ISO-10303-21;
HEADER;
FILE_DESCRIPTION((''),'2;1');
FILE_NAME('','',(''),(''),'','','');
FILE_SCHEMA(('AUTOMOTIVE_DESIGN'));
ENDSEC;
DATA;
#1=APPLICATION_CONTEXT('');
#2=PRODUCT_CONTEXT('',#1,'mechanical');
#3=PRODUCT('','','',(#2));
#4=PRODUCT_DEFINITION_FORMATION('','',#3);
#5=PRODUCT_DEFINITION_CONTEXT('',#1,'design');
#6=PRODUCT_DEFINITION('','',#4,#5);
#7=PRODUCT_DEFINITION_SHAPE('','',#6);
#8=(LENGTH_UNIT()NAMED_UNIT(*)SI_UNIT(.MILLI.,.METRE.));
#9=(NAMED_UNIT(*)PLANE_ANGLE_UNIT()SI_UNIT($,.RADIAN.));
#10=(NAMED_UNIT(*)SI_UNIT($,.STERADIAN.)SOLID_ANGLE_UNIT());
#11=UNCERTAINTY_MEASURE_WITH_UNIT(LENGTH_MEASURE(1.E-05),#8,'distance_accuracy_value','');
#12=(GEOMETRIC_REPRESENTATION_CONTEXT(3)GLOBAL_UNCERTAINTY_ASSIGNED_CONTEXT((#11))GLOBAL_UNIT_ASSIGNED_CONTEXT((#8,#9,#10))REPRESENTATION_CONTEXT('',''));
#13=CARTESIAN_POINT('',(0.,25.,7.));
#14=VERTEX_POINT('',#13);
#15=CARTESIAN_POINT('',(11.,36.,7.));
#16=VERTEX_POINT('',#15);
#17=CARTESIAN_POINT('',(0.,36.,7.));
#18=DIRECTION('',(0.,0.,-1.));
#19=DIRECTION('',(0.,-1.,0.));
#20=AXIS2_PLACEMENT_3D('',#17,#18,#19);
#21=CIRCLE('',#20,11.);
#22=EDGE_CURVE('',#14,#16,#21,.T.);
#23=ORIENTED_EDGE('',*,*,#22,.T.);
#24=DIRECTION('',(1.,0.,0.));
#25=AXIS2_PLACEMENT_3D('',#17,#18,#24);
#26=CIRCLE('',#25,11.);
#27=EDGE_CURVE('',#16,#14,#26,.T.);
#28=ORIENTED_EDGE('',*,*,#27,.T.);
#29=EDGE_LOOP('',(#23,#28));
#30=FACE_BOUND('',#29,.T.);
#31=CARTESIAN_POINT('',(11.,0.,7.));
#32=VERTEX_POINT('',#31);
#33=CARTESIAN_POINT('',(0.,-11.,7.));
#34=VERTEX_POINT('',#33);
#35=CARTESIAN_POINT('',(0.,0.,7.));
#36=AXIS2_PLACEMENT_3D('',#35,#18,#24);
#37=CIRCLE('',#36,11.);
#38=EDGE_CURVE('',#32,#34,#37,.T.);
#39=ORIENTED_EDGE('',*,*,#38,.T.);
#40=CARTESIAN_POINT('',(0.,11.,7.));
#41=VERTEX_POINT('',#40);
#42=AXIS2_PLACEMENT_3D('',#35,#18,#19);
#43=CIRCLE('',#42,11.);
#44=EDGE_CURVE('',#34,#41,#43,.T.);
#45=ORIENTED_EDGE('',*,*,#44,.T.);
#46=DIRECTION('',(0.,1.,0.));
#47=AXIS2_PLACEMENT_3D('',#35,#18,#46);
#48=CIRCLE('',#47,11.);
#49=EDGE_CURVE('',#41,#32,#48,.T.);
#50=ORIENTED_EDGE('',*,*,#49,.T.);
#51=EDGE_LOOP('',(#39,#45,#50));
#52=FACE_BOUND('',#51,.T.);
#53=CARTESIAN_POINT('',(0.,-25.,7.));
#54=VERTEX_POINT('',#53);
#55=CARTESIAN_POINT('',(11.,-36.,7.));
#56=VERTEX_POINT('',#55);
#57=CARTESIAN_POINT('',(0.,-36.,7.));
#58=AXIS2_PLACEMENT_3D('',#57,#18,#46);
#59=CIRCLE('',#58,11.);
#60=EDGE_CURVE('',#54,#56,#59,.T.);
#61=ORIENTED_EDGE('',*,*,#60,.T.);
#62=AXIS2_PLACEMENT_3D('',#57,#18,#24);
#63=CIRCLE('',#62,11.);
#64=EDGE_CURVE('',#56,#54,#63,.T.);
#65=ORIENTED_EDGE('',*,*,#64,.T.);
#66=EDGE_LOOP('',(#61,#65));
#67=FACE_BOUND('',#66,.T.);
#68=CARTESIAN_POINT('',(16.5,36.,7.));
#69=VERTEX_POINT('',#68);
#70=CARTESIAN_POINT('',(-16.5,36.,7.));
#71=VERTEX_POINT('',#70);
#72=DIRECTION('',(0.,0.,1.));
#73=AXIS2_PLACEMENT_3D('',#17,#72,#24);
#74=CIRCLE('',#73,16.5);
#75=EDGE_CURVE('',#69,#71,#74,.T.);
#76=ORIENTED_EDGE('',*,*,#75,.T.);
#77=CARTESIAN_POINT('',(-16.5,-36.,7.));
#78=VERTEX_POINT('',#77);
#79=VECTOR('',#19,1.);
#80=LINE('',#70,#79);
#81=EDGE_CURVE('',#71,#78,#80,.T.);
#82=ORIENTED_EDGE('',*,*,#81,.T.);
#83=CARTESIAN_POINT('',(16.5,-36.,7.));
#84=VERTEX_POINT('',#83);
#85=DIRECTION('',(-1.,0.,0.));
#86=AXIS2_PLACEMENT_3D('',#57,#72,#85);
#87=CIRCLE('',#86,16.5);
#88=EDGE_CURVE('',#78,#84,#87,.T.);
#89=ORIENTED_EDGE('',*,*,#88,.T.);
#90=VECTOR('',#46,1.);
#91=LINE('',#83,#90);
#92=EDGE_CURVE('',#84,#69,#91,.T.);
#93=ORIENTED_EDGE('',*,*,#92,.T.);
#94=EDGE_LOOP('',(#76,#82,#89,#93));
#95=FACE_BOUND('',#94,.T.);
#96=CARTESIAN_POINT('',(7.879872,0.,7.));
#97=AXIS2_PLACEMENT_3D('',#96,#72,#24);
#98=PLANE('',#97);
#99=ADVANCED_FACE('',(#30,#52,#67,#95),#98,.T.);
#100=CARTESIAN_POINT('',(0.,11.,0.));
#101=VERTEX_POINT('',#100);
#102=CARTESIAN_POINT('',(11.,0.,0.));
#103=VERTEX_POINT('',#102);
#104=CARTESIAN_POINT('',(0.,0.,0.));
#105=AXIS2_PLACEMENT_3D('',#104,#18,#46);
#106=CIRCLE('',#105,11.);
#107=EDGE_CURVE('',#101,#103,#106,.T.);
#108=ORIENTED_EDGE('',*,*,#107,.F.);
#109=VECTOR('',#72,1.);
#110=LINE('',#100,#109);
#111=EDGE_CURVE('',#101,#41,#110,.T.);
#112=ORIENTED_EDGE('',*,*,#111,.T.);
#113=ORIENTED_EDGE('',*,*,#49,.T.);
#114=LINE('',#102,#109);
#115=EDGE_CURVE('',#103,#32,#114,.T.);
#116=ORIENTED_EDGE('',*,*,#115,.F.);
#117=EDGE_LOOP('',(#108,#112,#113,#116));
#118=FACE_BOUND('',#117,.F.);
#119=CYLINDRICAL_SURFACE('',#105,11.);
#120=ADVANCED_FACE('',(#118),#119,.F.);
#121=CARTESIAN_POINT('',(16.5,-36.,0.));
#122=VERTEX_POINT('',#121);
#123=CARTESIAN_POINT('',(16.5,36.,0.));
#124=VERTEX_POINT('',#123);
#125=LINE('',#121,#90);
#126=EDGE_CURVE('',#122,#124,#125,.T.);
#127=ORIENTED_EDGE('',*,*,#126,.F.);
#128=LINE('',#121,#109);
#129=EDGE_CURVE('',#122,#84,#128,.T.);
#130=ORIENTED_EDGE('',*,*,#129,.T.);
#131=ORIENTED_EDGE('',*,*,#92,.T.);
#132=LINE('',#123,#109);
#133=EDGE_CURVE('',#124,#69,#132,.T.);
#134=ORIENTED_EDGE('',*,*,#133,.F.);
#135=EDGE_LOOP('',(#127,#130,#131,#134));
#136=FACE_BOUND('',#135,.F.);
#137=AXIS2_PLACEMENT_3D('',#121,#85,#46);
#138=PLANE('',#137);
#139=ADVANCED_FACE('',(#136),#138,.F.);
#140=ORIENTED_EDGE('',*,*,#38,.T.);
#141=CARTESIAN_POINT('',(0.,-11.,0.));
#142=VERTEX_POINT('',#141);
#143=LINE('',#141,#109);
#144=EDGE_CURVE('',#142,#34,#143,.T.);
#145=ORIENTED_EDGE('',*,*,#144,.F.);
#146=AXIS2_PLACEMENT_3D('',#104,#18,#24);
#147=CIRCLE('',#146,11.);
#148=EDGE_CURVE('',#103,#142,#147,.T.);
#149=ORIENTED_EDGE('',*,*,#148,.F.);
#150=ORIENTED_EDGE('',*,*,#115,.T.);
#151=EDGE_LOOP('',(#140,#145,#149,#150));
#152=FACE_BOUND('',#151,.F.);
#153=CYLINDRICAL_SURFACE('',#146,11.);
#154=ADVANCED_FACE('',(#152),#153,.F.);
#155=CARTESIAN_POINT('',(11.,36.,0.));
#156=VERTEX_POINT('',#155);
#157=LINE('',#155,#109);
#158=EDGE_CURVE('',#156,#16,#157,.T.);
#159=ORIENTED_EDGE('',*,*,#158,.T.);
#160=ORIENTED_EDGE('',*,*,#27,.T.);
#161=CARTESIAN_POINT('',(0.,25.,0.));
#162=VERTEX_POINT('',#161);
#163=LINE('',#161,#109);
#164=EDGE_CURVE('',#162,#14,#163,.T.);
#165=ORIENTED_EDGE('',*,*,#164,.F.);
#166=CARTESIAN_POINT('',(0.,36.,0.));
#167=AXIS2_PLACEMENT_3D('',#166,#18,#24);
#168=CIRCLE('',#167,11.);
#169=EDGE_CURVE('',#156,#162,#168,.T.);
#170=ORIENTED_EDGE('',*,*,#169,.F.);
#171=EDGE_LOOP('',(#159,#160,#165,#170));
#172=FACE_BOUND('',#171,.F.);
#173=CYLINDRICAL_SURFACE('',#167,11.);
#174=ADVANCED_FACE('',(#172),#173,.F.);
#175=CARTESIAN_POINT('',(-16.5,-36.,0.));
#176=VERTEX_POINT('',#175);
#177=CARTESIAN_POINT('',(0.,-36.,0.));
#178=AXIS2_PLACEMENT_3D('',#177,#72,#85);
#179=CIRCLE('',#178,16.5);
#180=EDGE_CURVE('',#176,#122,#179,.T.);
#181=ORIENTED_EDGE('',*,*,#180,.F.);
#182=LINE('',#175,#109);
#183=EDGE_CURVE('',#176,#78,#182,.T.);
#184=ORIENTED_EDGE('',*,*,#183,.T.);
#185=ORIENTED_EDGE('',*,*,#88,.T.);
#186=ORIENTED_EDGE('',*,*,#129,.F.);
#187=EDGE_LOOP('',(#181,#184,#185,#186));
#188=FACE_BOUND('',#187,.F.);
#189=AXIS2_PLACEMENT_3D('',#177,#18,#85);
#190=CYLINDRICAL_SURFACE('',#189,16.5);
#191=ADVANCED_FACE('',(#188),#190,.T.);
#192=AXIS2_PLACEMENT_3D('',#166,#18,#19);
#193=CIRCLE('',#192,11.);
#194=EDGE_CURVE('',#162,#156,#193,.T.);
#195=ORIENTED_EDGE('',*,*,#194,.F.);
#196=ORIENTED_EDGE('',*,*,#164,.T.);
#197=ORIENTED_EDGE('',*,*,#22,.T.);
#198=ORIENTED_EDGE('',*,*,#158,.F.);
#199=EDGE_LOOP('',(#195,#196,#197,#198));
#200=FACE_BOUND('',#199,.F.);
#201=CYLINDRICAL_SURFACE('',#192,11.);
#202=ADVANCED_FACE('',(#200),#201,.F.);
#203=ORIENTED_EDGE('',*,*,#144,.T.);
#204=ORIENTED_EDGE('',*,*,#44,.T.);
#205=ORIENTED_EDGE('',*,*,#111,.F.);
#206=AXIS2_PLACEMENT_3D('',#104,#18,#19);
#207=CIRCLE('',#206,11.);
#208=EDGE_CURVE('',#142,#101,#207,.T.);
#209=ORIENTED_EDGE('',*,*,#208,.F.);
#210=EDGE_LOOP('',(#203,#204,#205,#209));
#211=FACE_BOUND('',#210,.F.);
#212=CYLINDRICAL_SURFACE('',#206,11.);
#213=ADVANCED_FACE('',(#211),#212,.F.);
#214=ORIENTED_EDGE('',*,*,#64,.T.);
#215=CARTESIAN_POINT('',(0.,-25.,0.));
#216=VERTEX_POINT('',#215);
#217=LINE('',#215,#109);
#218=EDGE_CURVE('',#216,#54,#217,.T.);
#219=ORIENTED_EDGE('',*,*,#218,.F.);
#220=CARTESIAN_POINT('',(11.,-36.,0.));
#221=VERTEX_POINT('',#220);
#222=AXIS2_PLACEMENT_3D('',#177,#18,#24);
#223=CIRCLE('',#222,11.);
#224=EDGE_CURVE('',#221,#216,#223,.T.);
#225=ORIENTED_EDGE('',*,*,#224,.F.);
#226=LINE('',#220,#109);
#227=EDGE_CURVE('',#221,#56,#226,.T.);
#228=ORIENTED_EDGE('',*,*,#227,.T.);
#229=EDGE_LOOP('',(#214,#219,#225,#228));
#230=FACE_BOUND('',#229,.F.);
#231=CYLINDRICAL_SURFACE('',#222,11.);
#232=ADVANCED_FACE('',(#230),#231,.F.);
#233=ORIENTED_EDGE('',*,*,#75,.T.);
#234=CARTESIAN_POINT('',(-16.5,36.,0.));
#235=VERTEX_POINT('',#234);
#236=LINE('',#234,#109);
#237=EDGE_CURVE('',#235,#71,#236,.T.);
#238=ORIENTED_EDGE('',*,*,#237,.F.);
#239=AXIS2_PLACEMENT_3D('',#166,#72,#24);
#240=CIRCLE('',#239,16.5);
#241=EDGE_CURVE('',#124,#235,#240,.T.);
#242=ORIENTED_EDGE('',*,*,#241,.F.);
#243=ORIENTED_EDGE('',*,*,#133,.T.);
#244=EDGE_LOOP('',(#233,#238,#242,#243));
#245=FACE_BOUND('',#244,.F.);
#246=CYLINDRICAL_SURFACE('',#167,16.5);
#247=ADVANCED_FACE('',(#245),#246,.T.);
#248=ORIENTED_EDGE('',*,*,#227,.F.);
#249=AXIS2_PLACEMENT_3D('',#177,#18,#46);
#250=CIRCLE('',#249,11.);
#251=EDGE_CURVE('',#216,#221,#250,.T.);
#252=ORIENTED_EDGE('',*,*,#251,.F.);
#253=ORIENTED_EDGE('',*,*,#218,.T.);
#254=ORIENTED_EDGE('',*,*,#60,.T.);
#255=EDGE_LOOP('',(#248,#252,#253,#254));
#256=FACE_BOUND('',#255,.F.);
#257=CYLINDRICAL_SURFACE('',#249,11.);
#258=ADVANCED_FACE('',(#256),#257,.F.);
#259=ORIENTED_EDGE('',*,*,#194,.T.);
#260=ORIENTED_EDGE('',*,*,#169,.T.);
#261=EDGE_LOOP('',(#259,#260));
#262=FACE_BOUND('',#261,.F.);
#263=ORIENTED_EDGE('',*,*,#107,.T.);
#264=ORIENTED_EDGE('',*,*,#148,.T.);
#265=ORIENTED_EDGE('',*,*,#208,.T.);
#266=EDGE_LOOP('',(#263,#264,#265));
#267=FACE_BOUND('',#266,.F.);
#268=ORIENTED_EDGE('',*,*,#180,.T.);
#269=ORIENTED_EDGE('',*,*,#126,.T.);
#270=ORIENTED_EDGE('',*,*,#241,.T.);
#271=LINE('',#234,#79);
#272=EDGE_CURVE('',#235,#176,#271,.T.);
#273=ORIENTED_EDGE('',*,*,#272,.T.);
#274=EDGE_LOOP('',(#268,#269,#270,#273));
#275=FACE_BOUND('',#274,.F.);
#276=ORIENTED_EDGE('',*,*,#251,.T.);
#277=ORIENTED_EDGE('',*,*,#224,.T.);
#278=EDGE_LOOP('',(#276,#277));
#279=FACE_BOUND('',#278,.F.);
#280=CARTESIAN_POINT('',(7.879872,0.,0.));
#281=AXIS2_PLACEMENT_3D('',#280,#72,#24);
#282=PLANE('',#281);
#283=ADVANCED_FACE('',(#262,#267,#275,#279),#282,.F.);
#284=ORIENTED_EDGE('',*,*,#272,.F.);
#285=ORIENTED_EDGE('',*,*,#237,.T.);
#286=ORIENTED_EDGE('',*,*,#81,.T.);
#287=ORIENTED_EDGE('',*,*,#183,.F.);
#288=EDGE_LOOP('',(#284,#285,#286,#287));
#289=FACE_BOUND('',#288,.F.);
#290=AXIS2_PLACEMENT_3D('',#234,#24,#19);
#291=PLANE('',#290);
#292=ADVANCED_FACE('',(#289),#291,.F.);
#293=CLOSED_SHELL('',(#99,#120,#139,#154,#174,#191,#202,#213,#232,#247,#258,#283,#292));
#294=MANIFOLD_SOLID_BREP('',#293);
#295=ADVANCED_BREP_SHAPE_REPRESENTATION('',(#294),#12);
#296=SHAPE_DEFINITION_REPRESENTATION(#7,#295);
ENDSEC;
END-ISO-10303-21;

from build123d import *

# Parameters (mm, degrees)
F1_DEPTH = 7


# Not quite as in the source:
# - a feature names something its author has since deleted; it is built from what else it names


with BuildPart() as f1:
    # F0 (on Top) → F1 (new body)
    with BuildSketch(Plane.XY):
        with BuildLine():
            ThreePointArc((0, 11), (7.7781745931, 7.7781745931), (11, 0))
            ThreePointArc((11, 0), (7.7781745931, -7.7781745931), (0, -11))
            Line((0, -11), (0, -16.5))
            ThreePointArc((0, -16.5), (11.6672618896, -11.6672618896), (16.5, 0))
            ThreePointArc((16.5, 0), (11.6672618896, 11.6672618896), (0, 16.5))
            Line((0, 16.5), (0, 11))
        make_face()
        with BuildLine():
            ThreePointArc((0, -11), (-11, 0), (0, 11))
            Line((0, 11), (0, 16.5))
            ThreePointArc((0, 16.5), (-11.6672618896, 11.6672618896), (-16.5, 0))
            ThreePointArc((-16.5, 0), (-11.6672618896, -11.6672618896), (0, -16.5))
            Line((0, -16.5), (0, -11))
        make_face()
        with BuildLine():
            Line((0, 19.5), (0, 16.5))
            ThreePointArc((0, 16.5), (11.6672618896, 11.6672618896), (16.5, 0))
            Line((16.5, 0), (16.5, 36))
            ThreePointArc((16.5, 36), (11.6672618896, 24.3327381104), (0, 19.5))
        make_face()
        with BuildLine():
            ThreePointArc((-16.5, 0), (-11.6672618896, 11.6672618896), (0, 16.5))
            Line((0, 16.5), (0, 19.5))
            ThreePointArc((0, 19.5), (-11.6672618896, 24.3327381104), (-16.5, 36))
            Line((-16.5, 36), (-16.5, 0))
        make_face()
        with BuildLine():
            Line((0, -19.5), (0, -16.5))
            ThreePointArc((0, -16.5), (-11.6672618896, -11.6672618896), (-16.5, 0))
            Line((-16.5, 0), (-16.5, -36))
            ThreePointArc((-16.5, -36), (-11.6672618896, -24.3327381104), (0, -19.5))
        make_face()
        with BuildLine():
            ThreePointArc((16.5, 0), (11.6672618896, -11.6672618896), (0, -16.5))
            Line((0, -16.5), (0, -19.5))
            ThreePointArc((0, -19.5), (11.6672618896, -24.3327381104), (16.5, -36))
            Line((16.5, -36), (16.5, 0))
        make_face()
        with BuildLine():
            ThreePointArc((-16.5, 36), (-11.6672618896, 24.3327381104), (0, 19.5))
            ThreePointArc((0, 19.5), (11.6672618896, 24.3327381104), (16.5, 36))
            ThreePointArc((16.5, 36), (0, 52.5), (-16.5, 36))
        make_face()
        with BuildLine():
            ThreePointArc((11, 36), (7.7781745931, 28.2218254069), (0, 25))
            ThreePointArc((0, 25), (-7.7781745931, 43.7781745931), (11, 36))
        make_face(mode=Mode.SUBTRACT)
        with BuildLine():
            ThreePointArc((16.5, -36), (11.6672618896, -24.3327381104), (0, -19.5))
            ThreePointArc((0, -19.5), (-11.6672618896, -24.3327381104), (-16.5, -36))
            ThreePointArc((-16.5, -36), (0, -52.5), (16.5, -36))
        make_face()
        with BuildLine():
            ThreePointArc((11, -36), (-7.7781745931, -43.7781745931), (0, -25))
            ThreePointArc((0, -25), (7.7781745931, -28.2218254069), (11, -36))
        make_face(mode=Mode.SUBTRACT)
    extrude(amount=F1_DEPTH)


solid = f1.part
